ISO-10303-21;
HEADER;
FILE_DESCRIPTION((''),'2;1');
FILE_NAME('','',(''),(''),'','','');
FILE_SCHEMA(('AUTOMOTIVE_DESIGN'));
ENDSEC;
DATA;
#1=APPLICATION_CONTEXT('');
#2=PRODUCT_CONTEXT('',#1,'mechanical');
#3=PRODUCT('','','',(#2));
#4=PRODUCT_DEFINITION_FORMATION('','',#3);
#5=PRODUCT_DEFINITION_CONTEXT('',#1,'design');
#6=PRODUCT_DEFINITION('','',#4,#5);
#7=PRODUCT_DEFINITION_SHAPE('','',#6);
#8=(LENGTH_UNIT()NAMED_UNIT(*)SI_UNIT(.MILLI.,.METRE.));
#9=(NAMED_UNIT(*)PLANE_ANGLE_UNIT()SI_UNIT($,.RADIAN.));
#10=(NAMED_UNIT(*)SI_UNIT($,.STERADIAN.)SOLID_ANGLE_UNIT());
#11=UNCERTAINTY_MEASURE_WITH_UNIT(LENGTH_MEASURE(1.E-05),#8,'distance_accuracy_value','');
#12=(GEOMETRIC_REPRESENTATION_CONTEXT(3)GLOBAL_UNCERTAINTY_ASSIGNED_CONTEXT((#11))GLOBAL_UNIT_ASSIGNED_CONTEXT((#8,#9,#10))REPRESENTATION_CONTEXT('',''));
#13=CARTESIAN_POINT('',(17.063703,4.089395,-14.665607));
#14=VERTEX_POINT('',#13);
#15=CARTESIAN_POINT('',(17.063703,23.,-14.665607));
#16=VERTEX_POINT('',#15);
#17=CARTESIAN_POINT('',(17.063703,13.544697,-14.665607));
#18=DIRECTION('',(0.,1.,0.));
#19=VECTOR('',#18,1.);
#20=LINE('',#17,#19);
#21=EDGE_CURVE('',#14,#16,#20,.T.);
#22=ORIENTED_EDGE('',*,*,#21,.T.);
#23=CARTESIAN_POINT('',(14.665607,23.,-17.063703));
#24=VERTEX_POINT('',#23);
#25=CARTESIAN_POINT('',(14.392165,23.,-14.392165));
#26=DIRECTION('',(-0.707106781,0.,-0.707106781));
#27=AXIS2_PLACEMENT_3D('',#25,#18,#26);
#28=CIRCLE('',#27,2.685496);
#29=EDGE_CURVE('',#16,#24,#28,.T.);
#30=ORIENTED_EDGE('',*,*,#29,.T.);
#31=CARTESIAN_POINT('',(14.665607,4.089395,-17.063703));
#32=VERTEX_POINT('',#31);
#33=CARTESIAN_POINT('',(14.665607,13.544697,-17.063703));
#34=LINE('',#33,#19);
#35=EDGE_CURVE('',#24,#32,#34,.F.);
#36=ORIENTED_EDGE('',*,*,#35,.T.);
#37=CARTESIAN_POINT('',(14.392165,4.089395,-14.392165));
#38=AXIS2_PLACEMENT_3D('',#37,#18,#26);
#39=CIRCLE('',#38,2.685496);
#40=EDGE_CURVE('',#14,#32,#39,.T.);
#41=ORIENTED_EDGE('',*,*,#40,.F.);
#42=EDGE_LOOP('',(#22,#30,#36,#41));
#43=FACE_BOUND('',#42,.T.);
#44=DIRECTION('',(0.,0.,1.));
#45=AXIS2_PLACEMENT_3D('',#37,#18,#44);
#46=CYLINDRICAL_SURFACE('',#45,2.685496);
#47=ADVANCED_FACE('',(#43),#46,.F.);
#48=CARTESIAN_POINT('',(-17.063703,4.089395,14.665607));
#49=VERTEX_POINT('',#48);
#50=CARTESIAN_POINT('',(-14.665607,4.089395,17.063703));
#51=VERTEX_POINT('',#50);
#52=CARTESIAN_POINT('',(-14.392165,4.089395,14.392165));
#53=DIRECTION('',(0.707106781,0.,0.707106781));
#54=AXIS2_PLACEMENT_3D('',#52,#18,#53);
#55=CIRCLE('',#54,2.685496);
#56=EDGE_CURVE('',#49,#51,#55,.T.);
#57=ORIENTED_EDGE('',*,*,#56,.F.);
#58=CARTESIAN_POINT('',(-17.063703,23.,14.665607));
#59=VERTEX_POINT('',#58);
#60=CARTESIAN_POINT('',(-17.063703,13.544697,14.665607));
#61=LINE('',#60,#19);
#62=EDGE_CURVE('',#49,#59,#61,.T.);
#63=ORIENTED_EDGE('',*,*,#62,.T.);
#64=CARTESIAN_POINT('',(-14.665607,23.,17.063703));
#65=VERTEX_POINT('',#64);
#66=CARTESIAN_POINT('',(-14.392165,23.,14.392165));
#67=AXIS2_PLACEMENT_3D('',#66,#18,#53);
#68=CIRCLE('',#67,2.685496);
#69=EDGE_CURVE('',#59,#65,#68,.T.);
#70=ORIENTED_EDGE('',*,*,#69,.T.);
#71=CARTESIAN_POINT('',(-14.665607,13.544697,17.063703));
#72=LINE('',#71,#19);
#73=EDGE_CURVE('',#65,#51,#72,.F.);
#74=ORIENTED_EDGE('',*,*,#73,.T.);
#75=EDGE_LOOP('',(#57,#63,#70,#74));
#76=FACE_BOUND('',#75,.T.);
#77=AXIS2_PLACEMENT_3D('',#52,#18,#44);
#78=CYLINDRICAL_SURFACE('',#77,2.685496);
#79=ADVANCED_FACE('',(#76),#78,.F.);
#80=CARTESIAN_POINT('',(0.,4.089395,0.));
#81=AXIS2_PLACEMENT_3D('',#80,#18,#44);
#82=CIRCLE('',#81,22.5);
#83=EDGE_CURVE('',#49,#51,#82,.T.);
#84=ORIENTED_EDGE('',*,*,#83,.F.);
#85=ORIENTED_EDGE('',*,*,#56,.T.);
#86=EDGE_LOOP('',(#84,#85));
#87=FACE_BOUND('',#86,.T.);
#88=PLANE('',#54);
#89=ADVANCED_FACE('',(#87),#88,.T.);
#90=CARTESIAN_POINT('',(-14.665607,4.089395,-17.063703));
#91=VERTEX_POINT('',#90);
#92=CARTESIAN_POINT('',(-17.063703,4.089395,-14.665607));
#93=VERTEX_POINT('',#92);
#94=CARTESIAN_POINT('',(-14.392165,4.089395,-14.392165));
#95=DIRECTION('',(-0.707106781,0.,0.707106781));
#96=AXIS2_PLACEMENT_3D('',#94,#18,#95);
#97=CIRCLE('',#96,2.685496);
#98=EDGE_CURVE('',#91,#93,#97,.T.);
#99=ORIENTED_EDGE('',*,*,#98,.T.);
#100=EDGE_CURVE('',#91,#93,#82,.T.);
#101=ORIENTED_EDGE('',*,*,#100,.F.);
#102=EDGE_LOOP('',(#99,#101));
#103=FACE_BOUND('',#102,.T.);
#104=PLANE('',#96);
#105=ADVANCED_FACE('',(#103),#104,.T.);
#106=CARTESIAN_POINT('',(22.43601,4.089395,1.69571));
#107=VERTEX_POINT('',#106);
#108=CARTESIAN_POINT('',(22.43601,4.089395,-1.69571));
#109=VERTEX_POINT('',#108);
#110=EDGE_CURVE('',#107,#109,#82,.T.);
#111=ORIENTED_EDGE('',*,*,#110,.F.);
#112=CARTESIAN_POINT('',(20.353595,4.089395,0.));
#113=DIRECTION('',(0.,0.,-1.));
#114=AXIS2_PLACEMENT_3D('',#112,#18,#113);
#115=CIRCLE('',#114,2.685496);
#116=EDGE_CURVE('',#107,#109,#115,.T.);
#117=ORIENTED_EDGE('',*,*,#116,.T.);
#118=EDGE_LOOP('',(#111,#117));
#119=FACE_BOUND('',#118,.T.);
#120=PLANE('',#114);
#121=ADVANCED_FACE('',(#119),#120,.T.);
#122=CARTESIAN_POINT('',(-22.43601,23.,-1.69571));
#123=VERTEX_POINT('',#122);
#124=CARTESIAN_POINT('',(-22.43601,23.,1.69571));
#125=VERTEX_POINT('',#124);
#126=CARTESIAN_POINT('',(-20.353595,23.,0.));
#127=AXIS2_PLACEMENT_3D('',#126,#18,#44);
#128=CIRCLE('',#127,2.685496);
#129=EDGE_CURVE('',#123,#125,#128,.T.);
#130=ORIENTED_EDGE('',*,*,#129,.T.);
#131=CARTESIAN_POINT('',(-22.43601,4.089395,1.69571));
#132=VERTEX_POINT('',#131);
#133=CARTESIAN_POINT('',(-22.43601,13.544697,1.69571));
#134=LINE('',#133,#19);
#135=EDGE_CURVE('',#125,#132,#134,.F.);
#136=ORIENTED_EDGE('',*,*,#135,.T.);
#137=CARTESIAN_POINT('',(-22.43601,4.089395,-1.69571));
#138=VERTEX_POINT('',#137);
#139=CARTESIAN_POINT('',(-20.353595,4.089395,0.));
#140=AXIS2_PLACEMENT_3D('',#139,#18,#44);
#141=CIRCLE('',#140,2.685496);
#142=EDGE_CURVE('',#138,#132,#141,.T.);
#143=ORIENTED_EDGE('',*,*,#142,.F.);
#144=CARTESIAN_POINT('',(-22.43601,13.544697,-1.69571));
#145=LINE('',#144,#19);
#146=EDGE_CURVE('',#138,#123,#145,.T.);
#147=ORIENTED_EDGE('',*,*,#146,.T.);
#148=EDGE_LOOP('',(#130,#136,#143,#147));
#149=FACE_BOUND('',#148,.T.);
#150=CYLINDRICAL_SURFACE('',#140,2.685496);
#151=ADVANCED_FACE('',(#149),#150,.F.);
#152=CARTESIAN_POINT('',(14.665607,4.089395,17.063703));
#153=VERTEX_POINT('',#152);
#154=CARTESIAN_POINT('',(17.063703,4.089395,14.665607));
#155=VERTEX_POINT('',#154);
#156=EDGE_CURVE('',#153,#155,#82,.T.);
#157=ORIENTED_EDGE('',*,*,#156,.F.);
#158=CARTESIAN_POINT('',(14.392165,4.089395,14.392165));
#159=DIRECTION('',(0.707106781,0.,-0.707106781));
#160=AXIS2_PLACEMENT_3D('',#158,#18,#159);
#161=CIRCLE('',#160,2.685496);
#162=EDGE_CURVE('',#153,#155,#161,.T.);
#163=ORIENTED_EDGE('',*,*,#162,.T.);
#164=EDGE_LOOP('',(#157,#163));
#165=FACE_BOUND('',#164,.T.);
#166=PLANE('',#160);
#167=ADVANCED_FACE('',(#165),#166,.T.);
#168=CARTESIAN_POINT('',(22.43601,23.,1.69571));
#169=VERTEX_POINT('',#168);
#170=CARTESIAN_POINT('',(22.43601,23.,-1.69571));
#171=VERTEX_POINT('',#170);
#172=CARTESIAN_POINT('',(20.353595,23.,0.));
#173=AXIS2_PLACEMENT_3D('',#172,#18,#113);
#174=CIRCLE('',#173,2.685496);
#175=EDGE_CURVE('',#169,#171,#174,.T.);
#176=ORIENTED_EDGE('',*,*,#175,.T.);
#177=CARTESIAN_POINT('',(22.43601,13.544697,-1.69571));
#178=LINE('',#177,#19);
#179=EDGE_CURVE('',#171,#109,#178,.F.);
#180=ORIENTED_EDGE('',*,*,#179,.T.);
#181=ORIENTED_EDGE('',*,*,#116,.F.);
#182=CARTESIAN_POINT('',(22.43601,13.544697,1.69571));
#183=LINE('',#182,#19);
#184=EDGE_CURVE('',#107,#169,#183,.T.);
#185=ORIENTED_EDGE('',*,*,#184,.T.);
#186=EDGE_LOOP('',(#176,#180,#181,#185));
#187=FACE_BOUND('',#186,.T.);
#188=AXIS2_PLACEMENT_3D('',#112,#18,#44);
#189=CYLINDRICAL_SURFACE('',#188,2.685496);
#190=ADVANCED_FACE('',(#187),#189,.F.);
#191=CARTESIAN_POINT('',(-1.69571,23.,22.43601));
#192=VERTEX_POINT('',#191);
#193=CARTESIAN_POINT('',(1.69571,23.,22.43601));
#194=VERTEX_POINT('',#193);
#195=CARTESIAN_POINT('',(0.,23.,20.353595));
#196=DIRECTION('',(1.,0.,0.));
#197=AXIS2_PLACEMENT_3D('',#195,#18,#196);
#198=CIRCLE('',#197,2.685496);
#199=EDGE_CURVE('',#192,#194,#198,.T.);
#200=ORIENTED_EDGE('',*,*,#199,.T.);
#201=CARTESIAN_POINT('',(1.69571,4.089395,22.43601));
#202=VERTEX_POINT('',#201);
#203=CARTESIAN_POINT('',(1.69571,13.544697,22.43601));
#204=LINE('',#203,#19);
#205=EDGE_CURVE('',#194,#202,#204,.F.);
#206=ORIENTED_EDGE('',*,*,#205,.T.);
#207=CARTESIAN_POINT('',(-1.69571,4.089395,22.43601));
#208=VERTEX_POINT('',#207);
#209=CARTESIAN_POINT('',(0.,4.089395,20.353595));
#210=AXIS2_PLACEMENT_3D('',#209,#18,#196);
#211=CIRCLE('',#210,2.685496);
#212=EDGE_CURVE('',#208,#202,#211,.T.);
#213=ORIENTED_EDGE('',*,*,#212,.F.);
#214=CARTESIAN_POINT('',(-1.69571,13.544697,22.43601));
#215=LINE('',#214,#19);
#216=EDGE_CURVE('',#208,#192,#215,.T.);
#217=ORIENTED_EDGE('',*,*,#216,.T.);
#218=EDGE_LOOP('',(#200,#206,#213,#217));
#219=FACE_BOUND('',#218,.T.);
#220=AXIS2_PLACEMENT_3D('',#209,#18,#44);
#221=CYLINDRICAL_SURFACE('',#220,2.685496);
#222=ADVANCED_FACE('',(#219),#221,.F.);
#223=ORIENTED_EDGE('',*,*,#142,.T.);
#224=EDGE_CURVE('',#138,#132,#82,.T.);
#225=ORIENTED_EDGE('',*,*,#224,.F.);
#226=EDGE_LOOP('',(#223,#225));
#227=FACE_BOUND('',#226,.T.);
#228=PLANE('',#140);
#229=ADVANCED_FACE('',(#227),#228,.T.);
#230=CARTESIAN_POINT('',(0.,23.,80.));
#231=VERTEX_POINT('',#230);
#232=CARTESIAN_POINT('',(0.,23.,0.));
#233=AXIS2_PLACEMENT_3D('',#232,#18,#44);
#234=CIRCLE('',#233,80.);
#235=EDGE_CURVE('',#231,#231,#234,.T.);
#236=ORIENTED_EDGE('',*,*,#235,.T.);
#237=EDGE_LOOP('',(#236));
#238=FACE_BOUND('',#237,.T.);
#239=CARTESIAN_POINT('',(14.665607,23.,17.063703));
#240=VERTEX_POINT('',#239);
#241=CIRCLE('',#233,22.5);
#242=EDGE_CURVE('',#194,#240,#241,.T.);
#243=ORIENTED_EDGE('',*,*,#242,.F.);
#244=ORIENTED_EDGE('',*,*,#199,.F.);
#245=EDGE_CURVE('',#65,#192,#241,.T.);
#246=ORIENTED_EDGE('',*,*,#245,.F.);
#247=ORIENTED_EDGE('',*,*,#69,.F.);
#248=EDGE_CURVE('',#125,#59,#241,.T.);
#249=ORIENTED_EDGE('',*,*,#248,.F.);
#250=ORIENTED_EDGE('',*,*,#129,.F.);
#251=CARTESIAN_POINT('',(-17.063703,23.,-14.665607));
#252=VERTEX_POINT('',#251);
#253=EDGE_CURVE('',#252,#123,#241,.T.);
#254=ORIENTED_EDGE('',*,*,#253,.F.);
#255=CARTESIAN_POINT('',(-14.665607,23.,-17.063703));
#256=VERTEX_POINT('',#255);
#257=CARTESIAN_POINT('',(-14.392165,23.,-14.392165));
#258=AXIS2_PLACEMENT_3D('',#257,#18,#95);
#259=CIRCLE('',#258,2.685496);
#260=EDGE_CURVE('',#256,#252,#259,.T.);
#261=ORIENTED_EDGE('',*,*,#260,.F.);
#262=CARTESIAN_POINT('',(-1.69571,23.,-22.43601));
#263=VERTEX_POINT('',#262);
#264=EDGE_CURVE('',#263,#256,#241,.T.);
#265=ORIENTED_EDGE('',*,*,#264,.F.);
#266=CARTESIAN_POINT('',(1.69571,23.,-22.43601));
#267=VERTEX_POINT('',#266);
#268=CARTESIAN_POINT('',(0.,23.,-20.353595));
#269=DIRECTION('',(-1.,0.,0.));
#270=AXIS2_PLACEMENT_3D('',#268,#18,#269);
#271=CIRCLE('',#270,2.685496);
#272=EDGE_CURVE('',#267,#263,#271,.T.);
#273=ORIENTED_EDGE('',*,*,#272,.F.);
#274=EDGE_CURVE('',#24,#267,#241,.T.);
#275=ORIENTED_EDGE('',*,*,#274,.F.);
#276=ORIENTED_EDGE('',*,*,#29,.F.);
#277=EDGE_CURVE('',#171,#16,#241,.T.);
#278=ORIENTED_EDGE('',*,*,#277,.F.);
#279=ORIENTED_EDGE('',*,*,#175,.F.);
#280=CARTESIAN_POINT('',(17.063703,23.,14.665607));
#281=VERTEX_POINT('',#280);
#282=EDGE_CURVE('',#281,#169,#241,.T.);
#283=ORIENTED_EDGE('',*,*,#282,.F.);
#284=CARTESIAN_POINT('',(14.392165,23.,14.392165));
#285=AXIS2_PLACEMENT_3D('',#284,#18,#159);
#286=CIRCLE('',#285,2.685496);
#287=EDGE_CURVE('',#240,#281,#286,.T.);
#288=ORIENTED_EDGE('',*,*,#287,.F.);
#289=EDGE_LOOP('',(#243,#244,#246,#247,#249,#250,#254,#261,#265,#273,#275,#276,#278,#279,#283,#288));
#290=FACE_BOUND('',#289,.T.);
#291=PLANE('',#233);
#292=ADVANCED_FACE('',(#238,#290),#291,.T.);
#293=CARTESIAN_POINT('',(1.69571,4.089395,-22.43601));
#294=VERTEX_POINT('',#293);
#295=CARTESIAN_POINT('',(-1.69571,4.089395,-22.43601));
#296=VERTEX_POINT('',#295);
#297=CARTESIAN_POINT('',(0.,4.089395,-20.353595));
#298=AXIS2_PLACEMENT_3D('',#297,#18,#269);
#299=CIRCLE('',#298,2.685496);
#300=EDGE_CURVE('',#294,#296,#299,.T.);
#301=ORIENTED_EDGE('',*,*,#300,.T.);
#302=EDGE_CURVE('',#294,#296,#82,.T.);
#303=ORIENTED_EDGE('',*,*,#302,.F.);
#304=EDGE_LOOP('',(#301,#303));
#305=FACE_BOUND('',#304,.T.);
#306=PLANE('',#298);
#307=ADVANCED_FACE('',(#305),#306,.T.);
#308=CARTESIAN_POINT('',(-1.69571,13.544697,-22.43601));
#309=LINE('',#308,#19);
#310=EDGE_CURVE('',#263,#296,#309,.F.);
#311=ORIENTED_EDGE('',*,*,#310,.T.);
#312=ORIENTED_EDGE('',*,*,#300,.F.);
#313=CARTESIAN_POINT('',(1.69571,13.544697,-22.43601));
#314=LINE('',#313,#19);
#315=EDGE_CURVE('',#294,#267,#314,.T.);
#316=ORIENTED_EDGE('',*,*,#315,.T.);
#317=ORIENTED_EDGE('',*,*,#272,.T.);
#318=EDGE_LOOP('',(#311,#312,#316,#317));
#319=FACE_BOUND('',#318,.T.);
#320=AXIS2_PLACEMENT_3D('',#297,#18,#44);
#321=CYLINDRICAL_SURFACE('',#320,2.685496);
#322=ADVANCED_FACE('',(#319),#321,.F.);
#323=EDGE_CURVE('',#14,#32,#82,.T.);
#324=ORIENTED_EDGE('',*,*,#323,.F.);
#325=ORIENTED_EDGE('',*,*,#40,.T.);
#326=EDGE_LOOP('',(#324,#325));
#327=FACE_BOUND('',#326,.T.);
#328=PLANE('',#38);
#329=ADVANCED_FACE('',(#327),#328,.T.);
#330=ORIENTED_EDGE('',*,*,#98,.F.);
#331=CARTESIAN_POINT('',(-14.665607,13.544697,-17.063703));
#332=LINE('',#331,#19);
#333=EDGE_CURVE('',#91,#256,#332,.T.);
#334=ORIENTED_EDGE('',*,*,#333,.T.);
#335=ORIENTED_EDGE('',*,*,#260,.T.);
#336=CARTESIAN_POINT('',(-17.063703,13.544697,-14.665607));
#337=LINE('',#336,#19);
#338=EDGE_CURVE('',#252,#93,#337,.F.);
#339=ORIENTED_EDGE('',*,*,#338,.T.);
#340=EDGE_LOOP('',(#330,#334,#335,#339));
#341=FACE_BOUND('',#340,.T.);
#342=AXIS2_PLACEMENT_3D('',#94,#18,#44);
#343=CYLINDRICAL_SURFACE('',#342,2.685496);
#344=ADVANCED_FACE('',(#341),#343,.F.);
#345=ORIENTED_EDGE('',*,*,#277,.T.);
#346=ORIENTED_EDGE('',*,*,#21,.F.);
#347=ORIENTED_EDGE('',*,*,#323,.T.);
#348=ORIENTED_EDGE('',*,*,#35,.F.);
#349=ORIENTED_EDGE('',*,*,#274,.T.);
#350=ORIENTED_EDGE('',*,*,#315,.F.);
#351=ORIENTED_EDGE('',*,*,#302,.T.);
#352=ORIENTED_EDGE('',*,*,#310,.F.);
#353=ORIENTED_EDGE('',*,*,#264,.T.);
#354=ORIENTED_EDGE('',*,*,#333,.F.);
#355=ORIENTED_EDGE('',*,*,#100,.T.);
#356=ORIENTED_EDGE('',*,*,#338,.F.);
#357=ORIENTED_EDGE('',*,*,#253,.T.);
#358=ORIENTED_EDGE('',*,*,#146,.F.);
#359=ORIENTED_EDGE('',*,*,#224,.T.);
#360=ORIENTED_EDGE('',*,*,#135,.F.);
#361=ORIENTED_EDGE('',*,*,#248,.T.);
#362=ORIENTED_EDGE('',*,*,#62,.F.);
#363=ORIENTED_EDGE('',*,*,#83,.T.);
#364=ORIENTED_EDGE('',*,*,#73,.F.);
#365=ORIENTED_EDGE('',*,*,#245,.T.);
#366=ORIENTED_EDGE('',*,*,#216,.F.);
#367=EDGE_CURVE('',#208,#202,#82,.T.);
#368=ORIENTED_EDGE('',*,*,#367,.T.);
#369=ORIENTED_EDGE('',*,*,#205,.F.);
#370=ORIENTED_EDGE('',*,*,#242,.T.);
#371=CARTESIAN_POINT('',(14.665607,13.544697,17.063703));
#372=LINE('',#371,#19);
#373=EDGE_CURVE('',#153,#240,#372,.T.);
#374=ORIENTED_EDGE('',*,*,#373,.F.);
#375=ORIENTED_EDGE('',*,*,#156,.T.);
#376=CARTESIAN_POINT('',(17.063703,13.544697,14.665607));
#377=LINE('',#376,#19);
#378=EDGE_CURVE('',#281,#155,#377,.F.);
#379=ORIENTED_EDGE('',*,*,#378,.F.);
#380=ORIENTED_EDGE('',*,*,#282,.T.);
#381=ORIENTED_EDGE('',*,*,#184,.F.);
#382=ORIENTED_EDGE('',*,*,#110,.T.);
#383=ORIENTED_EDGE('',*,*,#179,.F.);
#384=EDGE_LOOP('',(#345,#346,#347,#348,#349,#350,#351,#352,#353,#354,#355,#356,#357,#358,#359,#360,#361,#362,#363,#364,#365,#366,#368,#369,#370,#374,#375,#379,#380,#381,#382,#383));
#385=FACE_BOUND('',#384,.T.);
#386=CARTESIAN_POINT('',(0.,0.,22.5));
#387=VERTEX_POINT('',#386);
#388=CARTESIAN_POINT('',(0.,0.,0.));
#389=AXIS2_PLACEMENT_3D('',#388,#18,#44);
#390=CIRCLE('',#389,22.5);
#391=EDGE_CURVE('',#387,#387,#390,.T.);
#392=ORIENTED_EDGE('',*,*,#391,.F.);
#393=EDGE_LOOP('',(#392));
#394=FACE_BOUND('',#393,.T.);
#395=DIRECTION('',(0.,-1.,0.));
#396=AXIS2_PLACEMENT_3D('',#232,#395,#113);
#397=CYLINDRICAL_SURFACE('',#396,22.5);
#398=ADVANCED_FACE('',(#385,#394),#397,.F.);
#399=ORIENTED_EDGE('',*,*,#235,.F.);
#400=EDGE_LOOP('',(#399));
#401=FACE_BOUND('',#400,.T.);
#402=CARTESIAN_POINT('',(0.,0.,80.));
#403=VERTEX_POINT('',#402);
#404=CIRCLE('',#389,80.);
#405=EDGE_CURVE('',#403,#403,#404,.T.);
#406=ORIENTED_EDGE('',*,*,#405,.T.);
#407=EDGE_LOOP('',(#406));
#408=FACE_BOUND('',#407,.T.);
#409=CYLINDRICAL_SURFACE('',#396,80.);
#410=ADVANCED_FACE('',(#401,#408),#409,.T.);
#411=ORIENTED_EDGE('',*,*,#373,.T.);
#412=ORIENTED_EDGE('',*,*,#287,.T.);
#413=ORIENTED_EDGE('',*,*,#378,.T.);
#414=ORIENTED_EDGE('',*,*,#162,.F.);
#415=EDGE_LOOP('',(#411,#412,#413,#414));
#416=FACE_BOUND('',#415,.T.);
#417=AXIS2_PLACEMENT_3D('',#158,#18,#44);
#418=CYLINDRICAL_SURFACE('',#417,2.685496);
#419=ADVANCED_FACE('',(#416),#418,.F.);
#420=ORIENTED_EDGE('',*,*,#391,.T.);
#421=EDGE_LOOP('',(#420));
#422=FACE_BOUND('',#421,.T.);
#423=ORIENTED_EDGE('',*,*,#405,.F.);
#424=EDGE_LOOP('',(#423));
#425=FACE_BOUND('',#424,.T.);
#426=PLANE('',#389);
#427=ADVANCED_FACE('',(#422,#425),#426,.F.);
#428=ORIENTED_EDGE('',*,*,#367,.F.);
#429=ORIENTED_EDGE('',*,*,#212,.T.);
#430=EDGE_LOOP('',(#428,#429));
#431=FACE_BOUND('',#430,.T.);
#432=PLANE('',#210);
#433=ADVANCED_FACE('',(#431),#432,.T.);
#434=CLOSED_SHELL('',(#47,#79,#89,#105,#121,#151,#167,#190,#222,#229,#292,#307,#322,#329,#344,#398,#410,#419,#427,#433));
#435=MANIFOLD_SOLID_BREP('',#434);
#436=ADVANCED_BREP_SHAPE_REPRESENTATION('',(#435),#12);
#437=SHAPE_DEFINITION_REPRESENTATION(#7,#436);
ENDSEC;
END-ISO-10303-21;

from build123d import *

# Parameters (mm, degrees)
SKETCH1_R           = 80
BOSS_EXTRUDE1_DEPTH = 23
SKETCH2_R           = 22.5
CUT_EXTRUDE1_DEPTH  = 116.451288429
SKETCH3_R           = 2.685496168
CUT_EXTRUDE2_DEPTH  = 18.910605263
CIRPATTERN1_COUNT   = 8


with BuildPart() as part:
    # Sketch1 → Boss-Extrude1 (new body)
    with BuildSketch(Plane(origin=(0, 0, 0), x_dir=(1, 0, 0), z_dir=(0, 1, 0))):
        Circle(SKETCH1_R)
    extrude(amount=BOSS_EXTRUDE1_DEPTH)

    # Sketch2 → Cut-Extrude1 (cut, through all)
    with BuildSketch(Plane(origin=(0, 0, 0), x_dir=(1, 0, 0), z_dir=(0, 1, 0))):
        Circle(SKETCH2_R)
    extrude(amount=CUT_EXTRUDE1_DEPTH, mode=Mode.SUBTRACT)

    # Sketch3 → Cut-Extrude2 (cut)
    with BuildSketch(Plane(origin=(0, 23, 0), x_dir=(1, 0, 0), z_dir=(0, 1, 0))):
        with Locations((-20.353594527, 0)):
            Circle(SKETCH3_R)
    cut_extrude2 = extrude(amount=-CUT_EXTRUDE2_DEPTH, mode=Mode.SUBTRACT)

    # CirPattern1: Cut-Extrude2 ×8 about axis
    cirpattern1_axis = Axis((0, 0, 0), (0, 1, 0))
    for i in range(1, CIRPATTERN1_COUNT):
        add(cut_extrude2.rotate(cirpattern1_axis, i * 360 / CIRPATTERN1_COUNT), mode=Mode.SUBTRACT)


solid = part.part
